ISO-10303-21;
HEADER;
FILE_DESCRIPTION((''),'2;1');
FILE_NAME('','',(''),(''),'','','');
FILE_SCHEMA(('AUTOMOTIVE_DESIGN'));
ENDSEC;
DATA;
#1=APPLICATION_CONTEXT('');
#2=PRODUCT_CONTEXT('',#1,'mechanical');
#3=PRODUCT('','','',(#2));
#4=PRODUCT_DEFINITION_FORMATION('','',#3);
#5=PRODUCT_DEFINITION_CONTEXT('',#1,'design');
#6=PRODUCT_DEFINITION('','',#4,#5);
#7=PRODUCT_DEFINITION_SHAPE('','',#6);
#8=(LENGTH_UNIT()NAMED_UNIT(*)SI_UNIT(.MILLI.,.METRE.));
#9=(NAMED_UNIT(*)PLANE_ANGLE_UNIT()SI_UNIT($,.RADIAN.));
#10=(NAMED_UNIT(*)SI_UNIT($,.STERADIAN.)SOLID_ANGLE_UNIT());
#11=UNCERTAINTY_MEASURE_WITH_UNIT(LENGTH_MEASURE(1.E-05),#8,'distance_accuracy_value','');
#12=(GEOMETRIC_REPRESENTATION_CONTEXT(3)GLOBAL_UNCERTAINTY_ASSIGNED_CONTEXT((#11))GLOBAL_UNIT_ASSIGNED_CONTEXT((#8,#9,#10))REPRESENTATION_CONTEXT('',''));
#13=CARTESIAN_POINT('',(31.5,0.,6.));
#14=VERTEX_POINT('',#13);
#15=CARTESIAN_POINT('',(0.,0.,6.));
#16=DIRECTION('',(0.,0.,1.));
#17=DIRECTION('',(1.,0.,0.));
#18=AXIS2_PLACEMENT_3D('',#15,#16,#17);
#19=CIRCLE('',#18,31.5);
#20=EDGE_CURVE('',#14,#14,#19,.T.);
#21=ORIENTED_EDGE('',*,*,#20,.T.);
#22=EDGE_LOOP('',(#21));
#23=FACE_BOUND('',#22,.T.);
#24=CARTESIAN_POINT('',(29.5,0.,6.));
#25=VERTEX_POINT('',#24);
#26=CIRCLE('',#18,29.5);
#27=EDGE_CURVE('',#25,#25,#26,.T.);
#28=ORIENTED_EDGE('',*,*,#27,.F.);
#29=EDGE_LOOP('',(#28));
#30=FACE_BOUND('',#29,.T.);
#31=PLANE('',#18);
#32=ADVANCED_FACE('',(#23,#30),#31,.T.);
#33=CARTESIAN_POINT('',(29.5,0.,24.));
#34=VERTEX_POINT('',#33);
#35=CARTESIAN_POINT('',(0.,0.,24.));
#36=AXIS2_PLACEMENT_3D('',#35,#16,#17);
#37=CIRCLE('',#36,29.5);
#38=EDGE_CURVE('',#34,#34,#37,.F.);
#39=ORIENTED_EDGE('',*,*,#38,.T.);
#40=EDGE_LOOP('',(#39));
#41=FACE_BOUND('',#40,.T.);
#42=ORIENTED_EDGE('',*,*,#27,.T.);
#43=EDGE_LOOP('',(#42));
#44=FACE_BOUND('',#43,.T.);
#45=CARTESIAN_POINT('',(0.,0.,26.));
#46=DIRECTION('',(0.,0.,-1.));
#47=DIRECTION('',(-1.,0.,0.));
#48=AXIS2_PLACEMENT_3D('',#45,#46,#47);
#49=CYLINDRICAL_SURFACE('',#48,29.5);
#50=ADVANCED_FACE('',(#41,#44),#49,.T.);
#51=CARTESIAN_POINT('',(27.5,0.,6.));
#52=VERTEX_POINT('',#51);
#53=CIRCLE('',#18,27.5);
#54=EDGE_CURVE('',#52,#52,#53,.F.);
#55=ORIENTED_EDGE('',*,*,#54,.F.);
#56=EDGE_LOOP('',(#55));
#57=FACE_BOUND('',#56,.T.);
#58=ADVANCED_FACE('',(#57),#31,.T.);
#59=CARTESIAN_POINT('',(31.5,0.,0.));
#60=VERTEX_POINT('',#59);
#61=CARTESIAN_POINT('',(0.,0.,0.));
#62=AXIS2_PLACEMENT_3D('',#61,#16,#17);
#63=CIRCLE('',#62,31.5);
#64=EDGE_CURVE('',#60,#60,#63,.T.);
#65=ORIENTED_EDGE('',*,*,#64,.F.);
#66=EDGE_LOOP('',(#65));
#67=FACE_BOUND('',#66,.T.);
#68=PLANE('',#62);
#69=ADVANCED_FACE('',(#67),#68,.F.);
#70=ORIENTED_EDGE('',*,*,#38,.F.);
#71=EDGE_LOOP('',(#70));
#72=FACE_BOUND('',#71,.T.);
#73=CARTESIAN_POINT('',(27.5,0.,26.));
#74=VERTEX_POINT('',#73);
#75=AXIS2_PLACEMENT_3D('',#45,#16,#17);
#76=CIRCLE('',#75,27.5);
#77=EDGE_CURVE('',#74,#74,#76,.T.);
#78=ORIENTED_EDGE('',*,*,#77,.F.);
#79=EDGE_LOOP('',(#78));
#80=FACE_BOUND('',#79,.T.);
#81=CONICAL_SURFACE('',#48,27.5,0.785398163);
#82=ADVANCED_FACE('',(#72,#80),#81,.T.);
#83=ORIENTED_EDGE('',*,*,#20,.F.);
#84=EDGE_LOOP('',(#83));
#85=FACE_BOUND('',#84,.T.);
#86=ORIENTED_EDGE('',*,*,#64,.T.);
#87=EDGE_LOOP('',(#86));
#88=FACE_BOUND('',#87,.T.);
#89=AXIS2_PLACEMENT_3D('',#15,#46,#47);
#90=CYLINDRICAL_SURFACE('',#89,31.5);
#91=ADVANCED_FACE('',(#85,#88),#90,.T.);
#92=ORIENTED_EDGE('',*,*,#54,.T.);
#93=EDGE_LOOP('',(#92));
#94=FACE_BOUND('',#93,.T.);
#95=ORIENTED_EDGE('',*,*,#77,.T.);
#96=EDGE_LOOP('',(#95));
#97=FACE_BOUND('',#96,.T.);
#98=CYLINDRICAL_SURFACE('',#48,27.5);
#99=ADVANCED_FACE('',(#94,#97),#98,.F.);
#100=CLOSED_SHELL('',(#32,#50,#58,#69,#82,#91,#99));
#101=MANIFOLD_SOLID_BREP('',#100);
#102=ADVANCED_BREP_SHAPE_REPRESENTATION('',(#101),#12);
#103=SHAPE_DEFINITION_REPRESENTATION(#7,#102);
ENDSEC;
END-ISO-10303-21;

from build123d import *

# Parameters (mm, degrees)
ESBO_O1_R                = 31.5
RESSALTO_EXTRUS_O1_DEPTH = 6
ESBO_O2_R                = 29.5
ESBO_O2_R_2              = 27.5
RESSALTO_EXTRUS_O2_DEPTH = 20
CHANFRO1_SIZE            = 2


with BuildPart() as part:
    # Esboço1 → Ressalto-extrusão1 (new body)
    with BuildSketch(Plane.XY):
        Circle(ESBO_O1_R)
    extrude(amount=RESSALTO_EXTRUS_O1_DEPTH)

    # Esboço2 → Ressalto-extrusão2 (add)
    with BuildSketch(Plane.XY.offset(6)):
        Circle(ESBO_O2_R)
        Circle(ESBO_O2_R_2, mode=Mode.SUBTRACT)
    extrude(amount=RESSALTO_EXTRUS_O2_DEPTH)

    # Chanfro1
    chanfro1_edges = [part.edges().sort_by_distance(p)[0] for p in [
        (-29.5, 0, 26),
    ]]
    chamfer(chanfro1_edges, length=CHANFRO1_SIZE - 0.0001)  # a hair under: the kernel refuses the full size


solid = part.part
